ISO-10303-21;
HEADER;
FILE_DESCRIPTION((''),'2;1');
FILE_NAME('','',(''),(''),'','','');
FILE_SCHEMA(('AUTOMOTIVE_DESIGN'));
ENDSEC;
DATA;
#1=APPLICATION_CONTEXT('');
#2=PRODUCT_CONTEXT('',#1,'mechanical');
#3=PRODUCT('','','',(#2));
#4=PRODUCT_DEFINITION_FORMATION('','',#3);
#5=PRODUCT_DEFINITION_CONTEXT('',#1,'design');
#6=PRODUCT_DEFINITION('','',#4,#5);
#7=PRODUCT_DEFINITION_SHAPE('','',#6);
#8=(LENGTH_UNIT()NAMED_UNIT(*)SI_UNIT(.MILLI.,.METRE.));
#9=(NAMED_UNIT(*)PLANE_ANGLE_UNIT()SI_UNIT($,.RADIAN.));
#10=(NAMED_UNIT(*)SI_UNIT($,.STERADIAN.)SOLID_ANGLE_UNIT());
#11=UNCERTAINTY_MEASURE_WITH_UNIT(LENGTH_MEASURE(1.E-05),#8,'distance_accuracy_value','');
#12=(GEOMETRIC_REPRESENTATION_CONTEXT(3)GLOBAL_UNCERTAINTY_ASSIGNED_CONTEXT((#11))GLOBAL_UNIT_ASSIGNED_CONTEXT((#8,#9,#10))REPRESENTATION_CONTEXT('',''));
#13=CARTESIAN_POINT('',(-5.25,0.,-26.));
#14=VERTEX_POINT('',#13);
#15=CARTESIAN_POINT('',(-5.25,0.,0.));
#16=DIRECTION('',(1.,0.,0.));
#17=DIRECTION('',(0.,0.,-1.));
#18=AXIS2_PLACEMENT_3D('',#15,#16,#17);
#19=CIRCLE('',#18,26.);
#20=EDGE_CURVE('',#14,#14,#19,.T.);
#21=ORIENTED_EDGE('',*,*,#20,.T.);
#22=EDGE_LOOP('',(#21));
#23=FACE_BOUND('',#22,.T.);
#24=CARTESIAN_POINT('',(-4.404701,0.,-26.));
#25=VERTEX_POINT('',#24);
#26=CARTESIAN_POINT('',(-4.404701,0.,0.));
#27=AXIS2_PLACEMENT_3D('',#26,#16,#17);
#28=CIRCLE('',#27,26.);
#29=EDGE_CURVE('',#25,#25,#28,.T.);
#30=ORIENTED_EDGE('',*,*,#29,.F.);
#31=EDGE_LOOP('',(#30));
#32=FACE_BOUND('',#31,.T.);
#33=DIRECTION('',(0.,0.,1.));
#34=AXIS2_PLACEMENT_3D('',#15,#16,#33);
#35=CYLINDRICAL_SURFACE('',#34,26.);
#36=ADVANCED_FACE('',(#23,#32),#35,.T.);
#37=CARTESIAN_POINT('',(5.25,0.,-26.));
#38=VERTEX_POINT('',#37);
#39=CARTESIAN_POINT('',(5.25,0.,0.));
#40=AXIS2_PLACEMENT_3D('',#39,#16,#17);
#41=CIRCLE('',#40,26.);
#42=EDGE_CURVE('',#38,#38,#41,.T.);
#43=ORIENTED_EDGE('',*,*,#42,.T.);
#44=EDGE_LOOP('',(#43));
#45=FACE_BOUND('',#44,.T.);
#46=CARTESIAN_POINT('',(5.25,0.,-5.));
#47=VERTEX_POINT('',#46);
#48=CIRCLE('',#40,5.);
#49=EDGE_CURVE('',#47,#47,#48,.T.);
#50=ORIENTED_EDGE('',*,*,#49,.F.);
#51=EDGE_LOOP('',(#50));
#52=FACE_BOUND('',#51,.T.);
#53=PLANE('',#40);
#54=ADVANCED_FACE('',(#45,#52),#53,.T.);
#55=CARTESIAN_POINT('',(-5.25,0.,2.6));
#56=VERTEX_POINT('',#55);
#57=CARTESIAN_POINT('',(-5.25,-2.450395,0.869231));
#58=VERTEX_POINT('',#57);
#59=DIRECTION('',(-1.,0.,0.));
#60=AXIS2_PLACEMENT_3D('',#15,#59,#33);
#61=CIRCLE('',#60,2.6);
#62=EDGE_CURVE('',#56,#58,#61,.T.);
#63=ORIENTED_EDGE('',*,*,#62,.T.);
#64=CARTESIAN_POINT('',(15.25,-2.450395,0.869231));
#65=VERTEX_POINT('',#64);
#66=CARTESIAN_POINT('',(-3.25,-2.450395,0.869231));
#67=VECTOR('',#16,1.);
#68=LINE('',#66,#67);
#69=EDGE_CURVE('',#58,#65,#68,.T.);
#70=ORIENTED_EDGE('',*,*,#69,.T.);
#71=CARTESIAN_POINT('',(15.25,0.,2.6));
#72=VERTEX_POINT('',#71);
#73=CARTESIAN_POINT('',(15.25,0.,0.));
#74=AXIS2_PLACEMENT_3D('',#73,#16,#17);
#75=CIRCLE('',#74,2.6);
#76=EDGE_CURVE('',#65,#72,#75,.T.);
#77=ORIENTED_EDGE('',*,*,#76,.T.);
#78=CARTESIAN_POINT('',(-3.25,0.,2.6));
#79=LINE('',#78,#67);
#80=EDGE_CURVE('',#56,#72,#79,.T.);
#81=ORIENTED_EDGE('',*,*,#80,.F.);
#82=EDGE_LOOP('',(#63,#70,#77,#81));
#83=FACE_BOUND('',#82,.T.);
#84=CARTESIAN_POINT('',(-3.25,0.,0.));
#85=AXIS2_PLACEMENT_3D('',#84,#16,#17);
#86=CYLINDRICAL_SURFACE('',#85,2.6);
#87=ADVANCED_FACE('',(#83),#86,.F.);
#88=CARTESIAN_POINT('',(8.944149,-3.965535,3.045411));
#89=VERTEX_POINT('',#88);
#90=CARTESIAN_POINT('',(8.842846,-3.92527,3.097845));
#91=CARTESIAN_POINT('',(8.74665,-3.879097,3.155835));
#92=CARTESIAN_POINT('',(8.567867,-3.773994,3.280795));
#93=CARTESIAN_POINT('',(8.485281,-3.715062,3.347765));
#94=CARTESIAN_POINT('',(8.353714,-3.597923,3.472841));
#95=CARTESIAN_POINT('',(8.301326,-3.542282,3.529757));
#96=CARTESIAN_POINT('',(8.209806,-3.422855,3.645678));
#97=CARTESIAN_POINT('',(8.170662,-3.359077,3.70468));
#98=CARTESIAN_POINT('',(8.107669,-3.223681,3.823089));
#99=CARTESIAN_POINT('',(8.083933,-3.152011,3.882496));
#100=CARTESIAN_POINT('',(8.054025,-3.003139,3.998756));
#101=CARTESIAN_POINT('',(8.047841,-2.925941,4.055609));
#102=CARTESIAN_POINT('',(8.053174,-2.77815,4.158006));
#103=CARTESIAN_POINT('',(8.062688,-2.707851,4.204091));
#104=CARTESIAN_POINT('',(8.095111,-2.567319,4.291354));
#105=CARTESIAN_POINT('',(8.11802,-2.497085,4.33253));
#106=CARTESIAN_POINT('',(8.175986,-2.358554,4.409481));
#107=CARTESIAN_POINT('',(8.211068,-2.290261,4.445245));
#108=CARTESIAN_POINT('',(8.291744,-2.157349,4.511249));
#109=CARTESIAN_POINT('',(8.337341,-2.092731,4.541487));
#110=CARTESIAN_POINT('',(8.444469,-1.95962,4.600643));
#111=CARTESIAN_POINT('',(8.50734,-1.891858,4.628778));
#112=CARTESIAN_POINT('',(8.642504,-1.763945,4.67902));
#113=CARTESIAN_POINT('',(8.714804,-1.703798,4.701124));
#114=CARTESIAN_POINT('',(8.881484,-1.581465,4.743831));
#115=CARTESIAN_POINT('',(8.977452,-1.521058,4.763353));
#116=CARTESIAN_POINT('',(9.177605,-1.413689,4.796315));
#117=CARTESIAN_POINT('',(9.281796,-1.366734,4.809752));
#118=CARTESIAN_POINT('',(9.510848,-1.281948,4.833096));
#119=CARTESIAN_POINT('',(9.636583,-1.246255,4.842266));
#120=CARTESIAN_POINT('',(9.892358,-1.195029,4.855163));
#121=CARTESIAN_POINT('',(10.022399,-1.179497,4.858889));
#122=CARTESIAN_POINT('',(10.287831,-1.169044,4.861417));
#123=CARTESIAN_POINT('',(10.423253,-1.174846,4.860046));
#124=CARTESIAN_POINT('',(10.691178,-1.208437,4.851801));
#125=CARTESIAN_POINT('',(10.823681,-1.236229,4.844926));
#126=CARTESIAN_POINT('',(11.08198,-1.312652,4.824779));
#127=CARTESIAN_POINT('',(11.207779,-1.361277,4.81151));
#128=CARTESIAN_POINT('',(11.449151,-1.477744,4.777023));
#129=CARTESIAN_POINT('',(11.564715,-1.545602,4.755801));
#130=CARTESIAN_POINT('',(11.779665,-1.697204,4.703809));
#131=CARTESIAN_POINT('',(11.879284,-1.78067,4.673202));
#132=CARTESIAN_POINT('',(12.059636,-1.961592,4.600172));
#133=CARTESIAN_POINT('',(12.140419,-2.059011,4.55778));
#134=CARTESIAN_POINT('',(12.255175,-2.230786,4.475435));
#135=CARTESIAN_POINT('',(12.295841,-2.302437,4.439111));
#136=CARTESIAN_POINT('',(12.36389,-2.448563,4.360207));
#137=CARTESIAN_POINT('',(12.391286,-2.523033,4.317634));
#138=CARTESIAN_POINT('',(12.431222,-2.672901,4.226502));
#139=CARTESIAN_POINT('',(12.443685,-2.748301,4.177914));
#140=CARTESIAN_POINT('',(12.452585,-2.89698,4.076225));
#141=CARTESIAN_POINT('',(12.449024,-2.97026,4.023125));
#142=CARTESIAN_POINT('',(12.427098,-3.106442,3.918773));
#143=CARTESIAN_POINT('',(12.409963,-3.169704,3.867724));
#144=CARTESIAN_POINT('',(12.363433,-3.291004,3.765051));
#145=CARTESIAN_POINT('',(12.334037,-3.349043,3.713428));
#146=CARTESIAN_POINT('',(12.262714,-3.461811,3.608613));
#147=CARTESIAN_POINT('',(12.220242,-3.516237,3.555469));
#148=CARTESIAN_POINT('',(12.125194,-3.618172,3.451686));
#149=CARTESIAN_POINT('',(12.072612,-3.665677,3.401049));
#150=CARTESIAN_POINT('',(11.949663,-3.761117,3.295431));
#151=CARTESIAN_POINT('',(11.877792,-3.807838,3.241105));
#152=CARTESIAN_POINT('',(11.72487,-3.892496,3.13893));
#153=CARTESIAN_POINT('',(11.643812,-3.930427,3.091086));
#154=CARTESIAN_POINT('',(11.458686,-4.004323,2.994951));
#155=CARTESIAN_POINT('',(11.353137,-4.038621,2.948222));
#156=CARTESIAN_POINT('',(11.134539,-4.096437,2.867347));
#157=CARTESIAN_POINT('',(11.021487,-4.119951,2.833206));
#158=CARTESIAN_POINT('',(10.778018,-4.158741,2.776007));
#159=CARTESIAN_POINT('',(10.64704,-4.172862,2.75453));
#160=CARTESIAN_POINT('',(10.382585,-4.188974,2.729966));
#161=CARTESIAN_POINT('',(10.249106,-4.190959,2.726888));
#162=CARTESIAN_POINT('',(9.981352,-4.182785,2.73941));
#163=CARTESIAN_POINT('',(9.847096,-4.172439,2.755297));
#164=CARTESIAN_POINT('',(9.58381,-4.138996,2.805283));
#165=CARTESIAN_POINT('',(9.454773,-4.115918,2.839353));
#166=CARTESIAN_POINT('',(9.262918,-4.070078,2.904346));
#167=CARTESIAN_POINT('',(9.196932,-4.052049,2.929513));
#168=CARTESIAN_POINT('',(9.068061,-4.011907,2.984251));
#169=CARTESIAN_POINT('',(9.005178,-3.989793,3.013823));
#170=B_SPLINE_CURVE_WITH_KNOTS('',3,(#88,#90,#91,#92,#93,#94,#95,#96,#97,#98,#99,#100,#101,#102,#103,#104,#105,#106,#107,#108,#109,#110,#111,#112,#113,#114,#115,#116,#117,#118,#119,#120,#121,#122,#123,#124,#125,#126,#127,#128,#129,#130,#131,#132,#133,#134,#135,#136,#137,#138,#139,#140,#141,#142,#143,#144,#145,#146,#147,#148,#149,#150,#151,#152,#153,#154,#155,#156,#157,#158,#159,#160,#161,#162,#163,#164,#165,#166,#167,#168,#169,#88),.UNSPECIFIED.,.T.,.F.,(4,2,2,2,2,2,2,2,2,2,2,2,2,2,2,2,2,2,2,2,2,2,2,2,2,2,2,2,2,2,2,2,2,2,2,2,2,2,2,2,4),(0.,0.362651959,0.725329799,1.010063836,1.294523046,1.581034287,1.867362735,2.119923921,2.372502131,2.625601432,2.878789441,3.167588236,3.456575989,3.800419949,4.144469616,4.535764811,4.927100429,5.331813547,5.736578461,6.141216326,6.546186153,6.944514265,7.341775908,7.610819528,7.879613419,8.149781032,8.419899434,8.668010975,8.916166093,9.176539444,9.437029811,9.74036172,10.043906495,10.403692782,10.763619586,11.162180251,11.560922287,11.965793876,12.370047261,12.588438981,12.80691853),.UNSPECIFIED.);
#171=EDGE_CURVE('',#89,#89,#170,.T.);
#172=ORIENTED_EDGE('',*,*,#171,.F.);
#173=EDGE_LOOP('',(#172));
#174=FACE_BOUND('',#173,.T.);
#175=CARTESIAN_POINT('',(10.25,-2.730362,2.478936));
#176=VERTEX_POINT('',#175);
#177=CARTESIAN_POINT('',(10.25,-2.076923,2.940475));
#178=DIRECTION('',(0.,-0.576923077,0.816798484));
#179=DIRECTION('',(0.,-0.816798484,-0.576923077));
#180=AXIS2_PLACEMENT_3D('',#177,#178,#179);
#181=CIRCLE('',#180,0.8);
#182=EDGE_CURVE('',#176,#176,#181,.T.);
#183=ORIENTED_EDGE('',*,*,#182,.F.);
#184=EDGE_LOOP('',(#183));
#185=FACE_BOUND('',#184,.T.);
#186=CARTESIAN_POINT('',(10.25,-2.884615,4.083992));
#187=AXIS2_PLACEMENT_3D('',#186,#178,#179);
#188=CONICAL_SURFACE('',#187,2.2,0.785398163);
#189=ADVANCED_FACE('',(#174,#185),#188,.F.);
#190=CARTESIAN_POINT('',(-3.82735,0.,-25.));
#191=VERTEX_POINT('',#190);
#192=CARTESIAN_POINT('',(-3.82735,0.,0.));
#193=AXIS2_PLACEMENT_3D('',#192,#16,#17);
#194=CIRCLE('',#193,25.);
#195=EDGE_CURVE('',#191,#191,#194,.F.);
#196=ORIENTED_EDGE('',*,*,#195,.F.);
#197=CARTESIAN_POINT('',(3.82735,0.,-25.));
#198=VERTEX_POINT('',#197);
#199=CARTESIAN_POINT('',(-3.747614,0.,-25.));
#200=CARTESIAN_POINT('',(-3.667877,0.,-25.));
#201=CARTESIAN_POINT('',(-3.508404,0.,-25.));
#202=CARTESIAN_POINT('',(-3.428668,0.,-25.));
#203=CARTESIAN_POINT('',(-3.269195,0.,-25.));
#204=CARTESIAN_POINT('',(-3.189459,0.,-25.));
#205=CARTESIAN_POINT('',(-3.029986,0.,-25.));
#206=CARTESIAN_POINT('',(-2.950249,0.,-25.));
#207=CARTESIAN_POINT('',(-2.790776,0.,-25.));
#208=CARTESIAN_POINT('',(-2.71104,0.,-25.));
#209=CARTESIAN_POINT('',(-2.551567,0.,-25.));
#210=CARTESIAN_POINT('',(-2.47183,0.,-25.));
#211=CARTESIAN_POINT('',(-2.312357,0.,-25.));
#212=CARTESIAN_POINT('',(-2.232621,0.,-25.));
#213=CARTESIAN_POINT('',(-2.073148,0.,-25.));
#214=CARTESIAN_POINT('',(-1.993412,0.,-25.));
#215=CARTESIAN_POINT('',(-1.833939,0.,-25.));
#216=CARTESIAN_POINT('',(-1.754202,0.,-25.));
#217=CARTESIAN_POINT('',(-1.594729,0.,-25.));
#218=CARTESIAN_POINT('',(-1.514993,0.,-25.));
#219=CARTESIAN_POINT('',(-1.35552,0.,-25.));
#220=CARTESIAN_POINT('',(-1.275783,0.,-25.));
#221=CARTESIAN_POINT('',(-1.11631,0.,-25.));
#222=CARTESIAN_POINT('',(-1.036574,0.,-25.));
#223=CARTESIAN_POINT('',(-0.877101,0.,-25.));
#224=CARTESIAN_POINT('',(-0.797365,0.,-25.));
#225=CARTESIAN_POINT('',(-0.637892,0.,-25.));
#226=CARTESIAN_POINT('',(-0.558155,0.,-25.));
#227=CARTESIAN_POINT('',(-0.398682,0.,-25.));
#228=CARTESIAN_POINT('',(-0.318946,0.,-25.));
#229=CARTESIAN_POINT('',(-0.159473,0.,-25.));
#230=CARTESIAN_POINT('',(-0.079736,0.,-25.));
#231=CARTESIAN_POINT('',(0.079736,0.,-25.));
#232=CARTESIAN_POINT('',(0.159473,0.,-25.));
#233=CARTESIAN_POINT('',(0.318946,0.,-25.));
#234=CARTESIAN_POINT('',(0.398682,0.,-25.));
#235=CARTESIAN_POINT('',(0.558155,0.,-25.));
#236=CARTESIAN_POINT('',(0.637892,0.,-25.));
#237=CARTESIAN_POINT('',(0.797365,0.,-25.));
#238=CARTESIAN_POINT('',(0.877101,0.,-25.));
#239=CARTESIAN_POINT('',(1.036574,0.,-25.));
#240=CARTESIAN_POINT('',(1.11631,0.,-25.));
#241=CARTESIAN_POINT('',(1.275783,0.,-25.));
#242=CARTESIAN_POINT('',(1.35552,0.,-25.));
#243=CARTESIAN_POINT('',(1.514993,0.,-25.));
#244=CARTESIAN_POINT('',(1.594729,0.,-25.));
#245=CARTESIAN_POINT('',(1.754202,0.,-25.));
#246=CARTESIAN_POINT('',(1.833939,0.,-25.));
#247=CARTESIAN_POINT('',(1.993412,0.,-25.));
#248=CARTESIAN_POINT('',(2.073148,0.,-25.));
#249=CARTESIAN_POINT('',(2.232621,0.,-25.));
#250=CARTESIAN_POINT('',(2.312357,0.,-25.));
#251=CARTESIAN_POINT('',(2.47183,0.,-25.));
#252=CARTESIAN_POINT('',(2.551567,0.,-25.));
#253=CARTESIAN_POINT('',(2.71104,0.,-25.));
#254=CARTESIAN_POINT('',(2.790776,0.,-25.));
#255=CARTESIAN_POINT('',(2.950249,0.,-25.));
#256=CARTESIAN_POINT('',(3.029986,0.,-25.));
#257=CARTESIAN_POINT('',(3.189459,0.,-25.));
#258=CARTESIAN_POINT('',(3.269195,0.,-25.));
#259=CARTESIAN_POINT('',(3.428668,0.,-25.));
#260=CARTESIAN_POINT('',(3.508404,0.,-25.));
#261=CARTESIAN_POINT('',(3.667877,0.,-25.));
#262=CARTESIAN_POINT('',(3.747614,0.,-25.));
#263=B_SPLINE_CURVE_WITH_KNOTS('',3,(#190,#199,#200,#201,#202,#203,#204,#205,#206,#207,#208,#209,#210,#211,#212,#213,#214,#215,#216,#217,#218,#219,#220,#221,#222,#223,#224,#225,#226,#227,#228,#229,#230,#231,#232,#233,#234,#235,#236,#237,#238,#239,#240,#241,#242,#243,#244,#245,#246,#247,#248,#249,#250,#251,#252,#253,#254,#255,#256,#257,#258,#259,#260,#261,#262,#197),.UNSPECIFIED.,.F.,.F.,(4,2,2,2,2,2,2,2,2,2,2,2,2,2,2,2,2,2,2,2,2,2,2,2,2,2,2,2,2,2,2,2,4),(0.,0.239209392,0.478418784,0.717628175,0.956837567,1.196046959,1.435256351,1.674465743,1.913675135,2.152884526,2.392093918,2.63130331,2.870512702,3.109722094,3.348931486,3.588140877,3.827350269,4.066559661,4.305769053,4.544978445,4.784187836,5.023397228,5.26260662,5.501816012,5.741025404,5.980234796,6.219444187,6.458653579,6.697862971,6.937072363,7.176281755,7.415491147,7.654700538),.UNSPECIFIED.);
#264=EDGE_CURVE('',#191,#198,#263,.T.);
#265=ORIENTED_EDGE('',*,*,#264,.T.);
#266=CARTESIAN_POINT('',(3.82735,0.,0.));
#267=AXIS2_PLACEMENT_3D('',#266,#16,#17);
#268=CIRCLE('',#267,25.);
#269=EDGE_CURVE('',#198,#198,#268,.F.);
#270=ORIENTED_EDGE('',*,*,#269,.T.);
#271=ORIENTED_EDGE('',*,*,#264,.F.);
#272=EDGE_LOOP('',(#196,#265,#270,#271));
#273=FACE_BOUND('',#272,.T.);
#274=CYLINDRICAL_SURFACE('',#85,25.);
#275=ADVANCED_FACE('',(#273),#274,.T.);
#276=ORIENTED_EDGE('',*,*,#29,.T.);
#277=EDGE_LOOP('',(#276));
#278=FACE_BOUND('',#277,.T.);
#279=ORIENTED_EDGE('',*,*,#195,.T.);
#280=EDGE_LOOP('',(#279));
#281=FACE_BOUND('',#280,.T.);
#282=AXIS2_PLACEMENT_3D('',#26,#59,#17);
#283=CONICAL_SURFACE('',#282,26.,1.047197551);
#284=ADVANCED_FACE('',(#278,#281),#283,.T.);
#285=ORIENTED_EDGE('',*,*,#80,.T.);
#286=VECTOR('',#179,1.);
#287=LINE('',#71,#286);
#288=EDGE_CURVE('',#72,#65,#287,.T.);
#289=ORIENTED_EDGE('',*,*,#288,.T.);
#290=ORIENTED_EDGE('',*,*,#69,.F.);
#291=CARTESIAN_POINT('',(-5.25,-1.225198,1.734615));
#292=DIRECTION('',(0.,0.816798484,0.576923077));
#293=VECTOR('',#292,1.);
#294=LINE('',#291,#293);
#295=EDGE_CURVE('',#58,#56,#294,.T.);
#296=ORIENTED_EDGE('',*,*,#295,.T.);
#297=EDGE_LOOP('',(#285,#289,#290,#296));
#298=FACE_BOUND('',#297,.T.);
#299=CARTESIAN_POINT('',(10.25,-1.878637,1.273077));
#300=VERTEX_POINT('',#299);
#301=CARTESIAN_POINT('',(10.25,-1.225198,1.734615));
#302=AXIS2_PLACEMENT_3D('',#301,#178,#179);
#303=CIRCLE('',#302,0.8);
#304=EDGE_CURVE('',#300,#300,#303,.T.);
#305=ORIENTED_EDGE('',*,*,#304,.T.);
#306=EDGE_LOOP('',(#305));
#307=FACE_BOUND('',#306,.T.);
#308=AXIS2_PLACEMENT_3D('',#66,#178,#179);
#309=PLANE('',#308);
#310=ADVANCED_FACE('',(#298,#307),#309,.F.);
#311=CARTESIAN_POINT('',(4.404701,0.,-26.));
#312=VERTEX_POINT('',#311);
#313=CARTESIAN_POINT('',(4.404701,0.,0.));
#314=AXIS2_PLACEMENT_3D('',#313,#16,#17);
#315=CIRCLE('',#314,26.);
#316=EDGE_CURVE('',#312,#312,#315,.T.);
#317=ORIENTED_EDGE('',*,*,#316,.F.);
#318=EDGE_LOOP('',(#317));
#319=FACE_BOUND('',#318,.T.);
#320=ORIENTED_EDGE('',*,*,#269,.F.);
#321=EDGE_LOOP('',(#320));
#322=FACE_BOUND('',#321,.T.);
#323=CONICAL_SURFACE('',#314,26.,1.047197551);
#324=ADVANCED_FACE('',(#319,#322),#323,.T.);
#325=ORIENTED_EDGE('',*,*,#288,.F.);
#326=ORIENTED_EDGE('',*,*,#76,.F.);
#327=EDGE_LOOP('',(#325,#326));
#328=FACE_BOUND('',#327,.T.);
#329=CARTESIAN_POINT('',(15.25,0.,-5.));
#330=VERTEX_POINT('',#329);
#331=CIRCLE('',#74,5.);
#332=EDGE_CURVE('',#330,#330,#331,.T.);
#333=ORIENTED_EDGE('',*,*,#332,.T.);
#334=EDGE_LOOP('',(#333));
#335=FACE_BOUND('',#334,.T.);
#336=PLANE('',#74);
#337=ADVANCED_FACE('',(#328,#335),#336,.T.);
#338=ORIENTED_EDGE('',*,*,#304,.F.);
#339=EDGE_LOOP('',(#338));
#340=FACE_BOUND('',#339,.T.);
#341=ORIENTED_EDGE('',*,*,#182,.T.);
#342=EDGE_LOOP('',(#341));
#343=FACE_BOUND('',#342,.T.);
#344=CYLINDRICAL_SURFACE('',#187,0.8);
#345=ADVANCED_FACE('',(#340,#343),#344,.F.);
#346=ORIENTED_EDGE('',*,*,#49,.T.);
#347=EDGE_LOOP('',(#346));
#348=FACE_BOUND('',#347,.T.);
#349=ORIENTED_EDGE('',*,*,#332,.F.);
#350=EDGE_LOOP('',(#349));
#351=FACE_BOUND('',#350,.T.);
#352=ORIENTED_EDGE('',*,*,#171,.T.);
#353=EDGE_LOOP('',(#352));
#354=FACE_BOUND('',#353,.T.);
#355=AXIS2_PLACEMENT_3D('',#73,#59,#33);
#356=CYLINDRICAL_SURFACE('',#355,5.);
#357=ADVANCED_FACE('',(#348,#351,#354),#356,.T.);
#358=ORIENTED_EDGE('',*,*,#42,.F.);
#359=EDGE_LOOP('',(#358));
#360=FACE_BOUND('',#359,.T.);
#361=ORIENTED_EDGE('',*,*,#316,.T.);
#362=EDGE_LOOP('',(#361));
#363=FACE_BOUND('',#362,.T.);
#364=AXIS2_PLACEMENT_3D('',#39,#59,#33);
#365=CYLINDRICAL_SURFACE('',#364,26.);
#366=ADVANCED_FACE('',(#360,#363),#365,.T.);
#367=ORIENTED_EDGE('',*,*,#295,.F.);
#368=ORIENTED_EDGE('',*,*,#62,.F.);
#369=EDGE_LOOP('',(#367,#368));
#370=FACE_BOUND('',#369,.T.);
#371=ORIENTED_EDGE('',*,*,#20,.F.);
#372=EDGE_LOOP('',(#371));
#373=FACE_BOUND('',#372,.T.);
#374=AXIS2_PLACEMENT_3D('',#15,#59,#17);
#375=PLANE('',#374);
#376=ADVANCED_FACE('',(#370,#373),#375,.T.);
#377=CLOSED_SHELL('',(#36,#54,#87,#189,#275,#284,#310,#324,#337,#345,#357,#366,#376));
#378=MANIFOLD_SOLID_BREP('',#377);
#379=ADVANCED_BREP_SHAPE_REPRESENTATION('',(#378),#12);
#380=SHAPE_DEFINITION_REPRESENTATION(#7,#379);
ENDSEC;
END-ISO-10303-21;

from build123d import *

# Parameters (mm, degrees)
SKETCH1_R                                       = 25
BOSS_EXTRUDE1_DEPTH                             = 3.25
SKETCH2_R                                       = 26
BOSS_EXTRUDE2_DEPTH                             = 2
CUT_EXTRUDE1_DEPTH                              = 38.739236876
BOSS_EXTRUDE3_START                             = 10
SKETCH6_R                                       = 5
BOSS_EXTRUDE3_DEPTH                             = 10
CSK_FOR_M2_FLAT_HEAD_MACHINE_SCREW1_D           = 1.6
CSK_FOR_M2_FLAT_HEAD_MACHINE_SCREW1_DEPTH       = 5
CSK_FOR_M2_FLAT_HEAD_MACHINE_SCREW1_CSINK_D     = 4.4
CSK_FOR_M2_FLAT_HEAD_MACHINE_SCREW1_CSINK_ANGLE = 90
CSK_FOR_M2_FLAT_HEAD_MACHINE_SCREW1_TIP         = 0.480688495
CHAMFER3_SIZE                                   = 1.154700538
CHAMFER3_SIZE_2                                 = 2
CUT_EXTRUDE2_DEPTH                              = 10


# Read off the part's stored shape, not the designer's step: Mirror6
with BuildPart() as part:
    # Sketch1 → Boss-Extrude1 (new, symmetric)
    with BuildSketch(Plane(origin=(0, 0, 0), x_dir=(0, 0, -1), z_dir=(1, 0, 0))):
        Circle(SKETCH1_R)
    extrude(amount=BOSS_EXTRUDE1_DEPTH, both=True)

    # Sketch2 → Boss-Extrude2 (add)
    with BuildSketch(Plane(origin=(3.25, 0, 0), x_dir=(0, 0, -1), z_dir=(1, 0, 0))):
        Circle(SKETCH2_R)
    extrude(amount=BOSS_EXTRUDE2_DEPTH)

    # Sketch3 → Cut-Extrude1 (cut, symmetric)
    with BuildSketch(Plane(origin=(5.25, 0, 0), x_dir=(0, 0, -1), z_dir=(1, 0, 0))):
        with BuildLine():
            Line((-0.869230769, -2.450395452), (-2.6, 0))
            ThreePointArc((-2.6, 0), (2.123676058, 1.5), (-0.869230769, -2.450395452))
        make_face()
    extrude(amount=CUT_EXTRUDE1_DEPTH, both=True, mode=Mode.SUBTRACT)

    # Sketch6 → Boss-Extrude3 (add)
    with BuildSketch(Plane(origin=(5.25, 0, 0), x_dir=(0, 0, -1), z_dir=(1, 0, 0)).offset(BOSS_EXTRUDE3_START)):
        Circle(SKETCH6_R)
        with BuildLine():
            Line((-2.6, 0), (-0.869230769, -2.450395452))
            ThreePointArc((-0.869230769, -2.450395452), (2.123676058, 1.5), (-2.6, 0))
        make_face(mode=Mode.SUBTRACT)
    extrude(amount=-BOSS_EXTRUDE3_DEPTH)

    # CSK for M2 Flat Head Machine Screw1
    with Locations(Plane(origin=(0, -2.884615385, 4.08399242), x_dir=(0, -0.8167984839075115, -0.576923076923077), z_dir=(0, -0.576923076923077, 0.8167984839075115))):
        with Locations((0, 10.25)):
            CounterSinkHole(CSK_FOR_M2_FLAT_HEAD_MACHINE_SCREW1_D / 2, CSK_FOR_M2_FLAT_HEAD_MACHINE_SCREW1_CSINK_D / 2, depth=CSK_FOR_M2_FLAT_HEAD_MACHINE_SCREW1_DEPTH, counter_sink_angle=CSK_FOR_M2_FLAT_HEAD_MACHINE_SCREW1_CSINK_ANGLE)
            with Locations((0, 0, -(CSK_FOR_M2_FLAT_HEAD_MACHINE_SCREW1_DEPTH + CSK_FOR_M2_FLAT_HEAD_MACHINE_SCREW1_TIP / 2))):  # 118° drill point
                Cone(0, CSK_FOR_M2_FLAT_HEAD_MACHINE_SCREW1_D / 2, CSK_FOR_M2_FLAT_HEAD_MACHINE_SCREW1_TIP, mode=Mode.SUBTRACT)

    # Chamfer3
    # the kernel refuses this chamfer: 2, 1.154700538 mm, written as the material it takes off along each edge
    with BuildSketch(Plane(origin=(3.25, 0, 0), x_dir=(0, 0, -1), z_dir=(0, -1, 0))) as chamfer3_piece_1_section:
        Polygon((26, CHAMFER3_SIZE), (26 - CHAMFER3_SIZE_2, 0), (26, 0), align=None)
    chamfer3_piece_1 = revolve(axis=Axis((3.25, 0, 0), (1, 0, 0)), mode=Mode.PRIVATE)
    chamfer3_piece_1 = chamfer3_piece_1 - Plane(origin=(4.089516227, 0, 0), x_dir=(0, 0, -1), z_dir=(1, 0, 0)) * Cylinder(25, 105, mode=Mode.PRIVATE)
    add(chamfer3_piece_1, mode=Mode.SUBTRACT)

    # Mirror6 outline → Mirror6 (revolve)
    with BuildSketch(Plane.YX):
        Polygon((26, -5.25), (26, -4.404700538), (25, -3.827350269), (25, -3.25), (2.6, -3.25), (2.6, 3.25), (0, 3.25), (0, -5.25), align=None)
    revolve(axis=Axis((0, 0, 0), (1, 0, 0)))

    # Sketch12 → Cut-Extrude2 (cut)
    with BuildSketch(Plane(origin=(3.25, 0, 0), x_dir=(0, 0, -1), z_dir=(1, 0, 0))):
        with BuildLine():
            Line((-2.6, 0), (-0.869230769, -2.450395452))
            ThreePointArc((-0.869230769, -2.450395452), (2.123676058, 1.5), (-2.6, 0))
        make_face()
    extrude(amount=-CUT_EXTRUDE2_DEPTH, mode=Mode.SUBTRACT)


solid = part.part
